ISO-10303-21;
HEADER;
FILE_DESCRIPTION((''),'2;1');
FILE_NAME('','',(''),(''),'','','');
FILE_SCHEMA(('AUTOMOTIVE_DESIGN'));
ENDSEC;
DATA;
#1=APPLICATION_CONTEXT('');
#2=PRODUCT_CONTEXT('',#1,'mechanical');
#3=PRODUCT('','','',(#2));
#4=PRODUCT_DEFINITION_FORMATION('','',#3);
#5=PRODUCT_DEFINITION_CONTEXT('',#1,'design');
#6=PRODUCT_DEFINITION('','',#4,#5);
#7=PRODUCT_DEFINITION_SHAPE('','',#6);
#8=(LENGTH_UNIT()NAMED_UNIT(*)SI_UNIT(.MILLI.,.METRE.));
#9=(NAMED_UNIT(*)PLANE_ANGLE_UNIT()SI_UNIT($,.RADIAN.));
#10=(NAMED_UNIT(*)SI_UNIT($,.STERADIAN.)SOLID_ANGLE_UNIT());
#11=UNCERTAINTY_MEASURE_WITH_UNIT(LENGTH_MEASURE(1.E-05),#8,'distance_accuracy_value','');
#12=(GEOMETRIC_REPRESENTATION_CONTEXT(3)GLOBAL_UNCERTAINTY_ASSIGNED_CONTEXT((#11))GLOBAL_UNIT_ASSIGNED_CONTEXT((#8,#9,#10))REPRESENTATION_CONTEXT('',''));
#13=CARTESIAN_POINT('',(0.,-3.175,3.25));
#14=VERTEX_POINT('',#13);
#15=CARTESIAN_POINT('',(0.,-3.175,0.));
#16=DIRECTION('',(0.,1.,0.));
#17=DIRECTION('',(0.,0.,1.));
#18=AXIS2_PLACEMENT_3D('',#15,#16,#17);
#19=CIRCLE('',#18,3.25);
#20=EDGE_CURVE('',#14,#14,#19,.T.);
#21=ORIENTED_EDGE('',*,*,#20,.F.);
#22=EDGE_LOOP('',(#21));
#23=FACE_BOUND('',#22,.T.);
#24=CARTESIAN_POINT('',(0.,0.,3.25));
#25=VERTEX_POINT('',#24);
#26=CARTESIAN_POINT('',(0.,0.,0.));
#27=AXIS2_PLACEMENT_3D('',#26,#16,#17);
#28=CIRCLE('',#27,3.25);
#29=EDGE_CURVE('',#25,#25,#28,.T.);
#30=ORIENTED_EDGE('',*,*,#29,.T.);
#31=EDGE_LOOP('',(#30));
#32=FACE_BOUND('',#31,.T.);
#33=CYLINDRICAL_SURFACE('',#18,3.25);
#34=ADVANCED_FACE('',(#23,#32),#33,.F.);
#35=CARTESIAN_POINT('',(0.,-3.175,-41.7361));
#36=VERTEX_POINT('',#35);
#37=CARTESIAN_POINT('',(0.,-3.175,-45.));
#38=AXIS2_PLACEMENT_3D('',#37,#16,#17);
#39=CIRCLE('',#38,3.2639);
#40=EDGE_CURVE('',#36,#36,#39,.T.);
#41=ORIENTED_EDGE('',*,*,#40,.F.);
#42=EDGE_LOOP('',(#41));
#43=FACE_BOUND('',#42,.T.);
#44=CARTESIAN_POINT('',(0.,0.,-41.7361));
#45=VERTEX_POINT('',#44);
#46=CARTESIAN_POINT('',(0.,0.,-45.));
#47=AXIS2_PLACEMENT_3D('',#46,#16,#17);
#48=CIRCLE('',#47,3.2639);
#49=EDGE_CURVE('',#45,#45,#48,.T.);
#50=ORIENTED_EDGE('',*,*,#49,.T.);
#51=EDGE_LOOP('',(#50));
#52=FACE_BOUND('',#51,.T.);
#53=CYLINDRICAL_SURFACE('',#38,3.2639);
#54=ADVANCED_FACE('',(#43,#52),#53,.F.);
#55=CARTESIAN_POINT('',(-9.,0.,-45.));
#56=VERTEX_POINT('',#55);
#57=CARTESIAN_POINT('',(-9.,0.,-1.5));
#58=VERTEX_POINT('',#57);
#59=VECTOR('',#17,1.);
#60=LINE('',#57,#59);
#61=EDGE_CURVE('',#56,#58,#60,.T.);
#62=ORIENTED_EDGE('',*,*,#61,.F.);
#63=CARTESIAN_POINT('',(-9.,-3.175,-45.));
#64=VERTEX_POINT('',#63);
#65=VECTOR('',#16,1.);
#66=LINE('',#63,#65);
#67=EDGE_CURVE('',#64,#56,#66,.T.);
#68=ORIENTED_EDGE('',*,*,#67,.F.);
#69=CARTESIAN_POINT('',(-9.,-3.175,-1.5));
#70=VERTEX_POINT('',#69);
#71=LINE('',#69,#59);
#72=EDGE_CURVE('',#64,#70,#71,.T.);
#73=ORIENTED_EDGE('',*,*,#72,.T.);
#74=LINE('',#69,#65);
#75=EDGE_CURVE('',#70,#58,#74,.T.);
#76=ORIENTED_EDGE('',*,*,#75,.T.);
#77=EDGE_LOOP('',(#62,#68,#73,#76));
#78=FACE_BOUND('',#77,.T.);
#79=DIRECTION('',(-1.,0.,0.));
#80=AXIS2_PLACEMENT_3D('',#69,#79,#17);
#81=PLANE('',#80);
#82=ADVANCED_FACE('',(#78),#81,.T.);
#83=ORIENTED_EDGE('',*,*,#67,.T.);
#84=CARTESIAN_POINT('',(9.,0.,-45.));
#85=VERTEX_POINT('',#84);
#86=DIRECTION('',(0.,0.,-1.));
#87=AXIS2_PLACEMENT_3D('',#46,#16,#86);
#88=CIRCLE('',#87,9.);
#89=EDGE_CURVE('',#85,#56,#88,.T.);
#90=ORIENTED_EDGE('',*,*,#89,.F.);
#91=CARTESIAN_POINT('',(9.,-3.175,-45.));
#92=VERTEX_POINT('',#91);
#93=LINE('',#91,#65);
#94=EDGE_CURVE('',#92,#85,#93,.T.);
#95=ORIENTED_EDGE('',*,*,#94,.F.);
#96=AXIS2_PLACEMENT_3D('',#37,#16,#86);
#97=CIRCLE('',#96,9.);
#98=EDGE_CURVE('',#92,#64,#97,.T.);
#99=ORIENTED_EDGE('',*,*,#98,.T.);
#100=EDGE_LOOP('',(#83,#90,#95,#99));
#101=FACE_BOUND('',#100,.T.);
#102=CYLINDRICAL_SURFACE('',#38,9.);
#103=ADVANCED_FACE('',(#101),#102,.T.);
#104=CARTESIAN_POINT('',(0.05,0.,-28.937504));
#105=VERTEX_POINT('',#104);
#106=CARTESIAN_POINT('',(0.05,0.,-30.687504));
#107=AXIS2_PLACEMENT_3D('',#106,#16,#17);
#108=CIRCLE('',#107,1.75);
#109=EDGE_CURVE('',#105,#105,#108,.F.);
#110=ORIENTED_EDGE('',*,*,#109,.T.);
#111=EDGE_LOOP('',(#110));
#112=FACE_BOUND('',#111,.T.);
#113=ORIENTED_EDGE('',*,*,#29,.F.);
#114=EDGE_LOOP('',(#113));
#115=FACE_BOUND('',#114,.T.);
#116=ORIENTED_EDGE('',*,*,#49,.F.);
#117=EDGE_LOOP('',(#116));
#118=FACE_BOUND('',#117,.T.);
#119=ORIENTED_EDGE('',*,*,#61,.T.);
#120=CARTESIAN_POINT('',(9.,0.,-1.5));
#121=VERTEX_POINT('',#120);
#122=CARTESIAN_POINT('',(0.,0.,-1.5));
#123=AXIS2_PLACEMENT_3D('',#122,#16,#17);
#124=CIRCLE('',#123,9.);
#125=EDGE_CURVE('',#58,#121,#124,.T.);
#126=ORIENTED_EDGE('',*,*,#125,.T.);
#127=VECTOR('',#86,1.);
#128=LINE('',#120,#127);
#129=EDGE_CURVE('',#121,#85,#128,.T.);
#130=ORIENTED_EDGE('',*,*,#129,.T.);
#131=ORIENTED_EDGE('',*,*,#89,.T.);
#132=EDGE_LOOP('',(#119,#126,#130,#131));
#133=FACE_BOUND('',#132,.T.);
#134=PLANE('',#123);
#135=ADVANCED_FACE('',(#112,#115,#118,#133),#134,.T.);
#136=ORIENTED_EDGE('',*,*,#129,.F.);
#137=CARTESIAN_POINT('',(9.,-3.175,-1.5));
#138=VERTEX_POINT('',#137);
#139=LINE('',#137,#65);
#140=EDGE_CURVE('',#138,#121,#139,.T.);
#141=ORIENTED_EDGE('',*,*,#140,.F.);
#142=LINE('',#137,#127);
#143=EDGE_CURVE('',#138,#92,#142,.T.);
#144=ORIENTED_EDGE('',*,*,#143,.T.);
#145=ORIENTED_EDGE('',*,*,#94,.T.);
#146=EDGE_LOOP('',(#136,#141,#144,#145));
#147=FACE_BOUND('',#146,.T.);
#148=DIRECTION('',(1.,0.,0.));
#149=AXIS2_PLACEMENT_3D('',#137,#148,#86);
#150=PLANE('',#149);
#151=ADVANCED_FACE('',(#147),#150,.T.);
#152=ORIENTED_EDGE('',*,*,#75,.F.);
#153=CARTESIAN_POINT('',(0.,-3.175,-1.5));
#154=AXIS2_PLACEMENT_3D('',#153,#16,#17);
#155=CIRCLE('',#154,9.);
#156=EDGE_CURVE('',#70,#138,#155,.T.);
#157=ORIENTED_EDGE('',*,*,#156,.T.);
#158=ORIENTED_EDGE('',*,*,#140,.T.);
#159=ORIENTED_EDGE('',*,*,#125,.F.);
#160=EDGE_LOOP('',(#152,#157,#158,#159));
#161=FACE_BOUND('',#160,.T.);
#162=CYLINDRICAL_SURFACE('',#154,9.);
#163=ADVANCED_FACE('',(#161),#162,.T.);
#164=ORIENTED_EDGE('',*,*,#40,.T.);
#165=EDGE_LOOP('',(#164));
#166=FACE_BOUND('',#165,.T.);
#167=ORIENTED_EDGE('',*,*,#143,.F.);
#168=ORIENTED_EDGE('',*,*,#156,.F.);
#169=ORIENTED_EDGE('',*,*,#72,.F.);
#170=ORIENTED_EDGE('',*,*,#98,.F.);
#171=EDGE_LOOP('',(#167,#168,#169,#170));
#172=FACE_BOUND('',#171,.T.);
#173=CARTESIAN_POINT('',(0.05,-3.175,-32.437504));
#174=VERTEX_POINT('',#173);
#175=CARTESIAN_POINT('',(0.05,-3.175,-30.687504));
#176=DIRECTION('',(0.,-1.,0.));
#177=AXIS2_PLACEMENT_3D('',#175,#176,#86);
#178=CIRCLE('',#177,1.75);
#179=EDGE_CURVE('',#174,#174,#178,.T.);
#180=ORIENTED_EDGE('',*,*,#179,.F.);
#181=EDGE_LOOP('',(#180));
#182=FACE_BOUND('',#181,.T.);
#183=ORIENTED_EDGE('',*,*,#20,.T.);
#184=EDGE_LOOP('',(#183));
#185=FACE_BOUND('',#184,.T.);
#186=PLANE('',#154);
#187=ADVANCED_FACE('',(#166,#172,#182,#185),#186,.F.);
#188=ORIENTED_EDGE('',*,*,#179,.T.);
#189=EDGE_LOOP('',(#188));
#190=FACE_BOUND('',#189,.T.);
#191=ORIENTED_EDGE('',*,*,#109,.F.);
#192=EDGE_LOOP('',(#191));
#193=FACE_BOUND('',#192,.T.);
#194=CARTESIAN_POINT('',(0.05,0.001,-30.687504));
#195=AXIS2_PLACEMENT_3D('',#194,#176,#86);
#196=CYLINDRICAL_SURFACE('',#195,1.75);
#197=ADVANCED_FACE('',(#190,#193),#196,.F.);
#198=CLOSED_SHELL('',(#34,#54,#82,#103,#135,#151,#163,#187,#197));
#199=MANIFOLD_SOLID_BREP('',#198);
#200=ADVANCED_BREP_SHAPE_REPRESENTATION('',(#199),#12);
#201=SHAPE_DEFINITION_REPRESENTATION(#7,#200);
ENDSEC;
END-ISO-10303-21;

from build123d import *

# Parameters (mm, degrees)
SKETCH1_R          = 3.25
SKETCH1_R_2        = 3.2639
BASE_FLANGE1_DEPTH = 3.175
CUT_EXTRUDE1_REACH = 56.837
SKETCH2_R          = 1.75


# Sheet-metal steps are written as plain solids
with BuildPart() as part:
    # Sketch1 → Base-Flange1 (new body)
    with BuildSketch(Plane(origin=(0, 0, 0), x_dir=(1, 0, 0), z_dir=(0, 1, 0))):
        with BuildLine():
            Line((9, 1.5), (9, 45))
            ThreePointArc((9, 45), (0, 54), (-9, 45))
            Line((-9, 45), (-9, 1.5))
            ThreePointArc((-9, 1.5), (0, -7.5), (9, 1.5))
        make_face()
        with Locations(Location((0, 0, 0), (0, 0, 270))):
            Circle(SKETCH1_R, mode=Mode.SUBTRACT)
        with Locations(Location((0, 45, 0), (0, 0, 270))):
            Circle(SKETCH1_R_2, mode=Mode.SUBTRACT)
    extrude(amount=-BASE_FLANGE1_DEPTH)

    # Sketch2 → Cut-Extrude1 (cut, up to next)
    with BuildSketch(Plane.XZ.offset(3.175), mode=Mode.PRIVATE) as cut_extrude1_sk1:
        with Locations(Location((0.05, -30.687503986, 0), (0, 0, 270))):
            Circle(SKETCH2_R)
    cut_extrude1_tool1 = extrude(cut_extrude1_sk1.sketch, amount=-CUT_EXTRUDE1_REACH, mode=Mode.PRIVATE) & part.part
    add(cut_extrude1_tool1.solids().sort_by_distance((0.05, -3.175, -30.687504))[0], mode=Mode.SUBTRACT)


solid = part.part
